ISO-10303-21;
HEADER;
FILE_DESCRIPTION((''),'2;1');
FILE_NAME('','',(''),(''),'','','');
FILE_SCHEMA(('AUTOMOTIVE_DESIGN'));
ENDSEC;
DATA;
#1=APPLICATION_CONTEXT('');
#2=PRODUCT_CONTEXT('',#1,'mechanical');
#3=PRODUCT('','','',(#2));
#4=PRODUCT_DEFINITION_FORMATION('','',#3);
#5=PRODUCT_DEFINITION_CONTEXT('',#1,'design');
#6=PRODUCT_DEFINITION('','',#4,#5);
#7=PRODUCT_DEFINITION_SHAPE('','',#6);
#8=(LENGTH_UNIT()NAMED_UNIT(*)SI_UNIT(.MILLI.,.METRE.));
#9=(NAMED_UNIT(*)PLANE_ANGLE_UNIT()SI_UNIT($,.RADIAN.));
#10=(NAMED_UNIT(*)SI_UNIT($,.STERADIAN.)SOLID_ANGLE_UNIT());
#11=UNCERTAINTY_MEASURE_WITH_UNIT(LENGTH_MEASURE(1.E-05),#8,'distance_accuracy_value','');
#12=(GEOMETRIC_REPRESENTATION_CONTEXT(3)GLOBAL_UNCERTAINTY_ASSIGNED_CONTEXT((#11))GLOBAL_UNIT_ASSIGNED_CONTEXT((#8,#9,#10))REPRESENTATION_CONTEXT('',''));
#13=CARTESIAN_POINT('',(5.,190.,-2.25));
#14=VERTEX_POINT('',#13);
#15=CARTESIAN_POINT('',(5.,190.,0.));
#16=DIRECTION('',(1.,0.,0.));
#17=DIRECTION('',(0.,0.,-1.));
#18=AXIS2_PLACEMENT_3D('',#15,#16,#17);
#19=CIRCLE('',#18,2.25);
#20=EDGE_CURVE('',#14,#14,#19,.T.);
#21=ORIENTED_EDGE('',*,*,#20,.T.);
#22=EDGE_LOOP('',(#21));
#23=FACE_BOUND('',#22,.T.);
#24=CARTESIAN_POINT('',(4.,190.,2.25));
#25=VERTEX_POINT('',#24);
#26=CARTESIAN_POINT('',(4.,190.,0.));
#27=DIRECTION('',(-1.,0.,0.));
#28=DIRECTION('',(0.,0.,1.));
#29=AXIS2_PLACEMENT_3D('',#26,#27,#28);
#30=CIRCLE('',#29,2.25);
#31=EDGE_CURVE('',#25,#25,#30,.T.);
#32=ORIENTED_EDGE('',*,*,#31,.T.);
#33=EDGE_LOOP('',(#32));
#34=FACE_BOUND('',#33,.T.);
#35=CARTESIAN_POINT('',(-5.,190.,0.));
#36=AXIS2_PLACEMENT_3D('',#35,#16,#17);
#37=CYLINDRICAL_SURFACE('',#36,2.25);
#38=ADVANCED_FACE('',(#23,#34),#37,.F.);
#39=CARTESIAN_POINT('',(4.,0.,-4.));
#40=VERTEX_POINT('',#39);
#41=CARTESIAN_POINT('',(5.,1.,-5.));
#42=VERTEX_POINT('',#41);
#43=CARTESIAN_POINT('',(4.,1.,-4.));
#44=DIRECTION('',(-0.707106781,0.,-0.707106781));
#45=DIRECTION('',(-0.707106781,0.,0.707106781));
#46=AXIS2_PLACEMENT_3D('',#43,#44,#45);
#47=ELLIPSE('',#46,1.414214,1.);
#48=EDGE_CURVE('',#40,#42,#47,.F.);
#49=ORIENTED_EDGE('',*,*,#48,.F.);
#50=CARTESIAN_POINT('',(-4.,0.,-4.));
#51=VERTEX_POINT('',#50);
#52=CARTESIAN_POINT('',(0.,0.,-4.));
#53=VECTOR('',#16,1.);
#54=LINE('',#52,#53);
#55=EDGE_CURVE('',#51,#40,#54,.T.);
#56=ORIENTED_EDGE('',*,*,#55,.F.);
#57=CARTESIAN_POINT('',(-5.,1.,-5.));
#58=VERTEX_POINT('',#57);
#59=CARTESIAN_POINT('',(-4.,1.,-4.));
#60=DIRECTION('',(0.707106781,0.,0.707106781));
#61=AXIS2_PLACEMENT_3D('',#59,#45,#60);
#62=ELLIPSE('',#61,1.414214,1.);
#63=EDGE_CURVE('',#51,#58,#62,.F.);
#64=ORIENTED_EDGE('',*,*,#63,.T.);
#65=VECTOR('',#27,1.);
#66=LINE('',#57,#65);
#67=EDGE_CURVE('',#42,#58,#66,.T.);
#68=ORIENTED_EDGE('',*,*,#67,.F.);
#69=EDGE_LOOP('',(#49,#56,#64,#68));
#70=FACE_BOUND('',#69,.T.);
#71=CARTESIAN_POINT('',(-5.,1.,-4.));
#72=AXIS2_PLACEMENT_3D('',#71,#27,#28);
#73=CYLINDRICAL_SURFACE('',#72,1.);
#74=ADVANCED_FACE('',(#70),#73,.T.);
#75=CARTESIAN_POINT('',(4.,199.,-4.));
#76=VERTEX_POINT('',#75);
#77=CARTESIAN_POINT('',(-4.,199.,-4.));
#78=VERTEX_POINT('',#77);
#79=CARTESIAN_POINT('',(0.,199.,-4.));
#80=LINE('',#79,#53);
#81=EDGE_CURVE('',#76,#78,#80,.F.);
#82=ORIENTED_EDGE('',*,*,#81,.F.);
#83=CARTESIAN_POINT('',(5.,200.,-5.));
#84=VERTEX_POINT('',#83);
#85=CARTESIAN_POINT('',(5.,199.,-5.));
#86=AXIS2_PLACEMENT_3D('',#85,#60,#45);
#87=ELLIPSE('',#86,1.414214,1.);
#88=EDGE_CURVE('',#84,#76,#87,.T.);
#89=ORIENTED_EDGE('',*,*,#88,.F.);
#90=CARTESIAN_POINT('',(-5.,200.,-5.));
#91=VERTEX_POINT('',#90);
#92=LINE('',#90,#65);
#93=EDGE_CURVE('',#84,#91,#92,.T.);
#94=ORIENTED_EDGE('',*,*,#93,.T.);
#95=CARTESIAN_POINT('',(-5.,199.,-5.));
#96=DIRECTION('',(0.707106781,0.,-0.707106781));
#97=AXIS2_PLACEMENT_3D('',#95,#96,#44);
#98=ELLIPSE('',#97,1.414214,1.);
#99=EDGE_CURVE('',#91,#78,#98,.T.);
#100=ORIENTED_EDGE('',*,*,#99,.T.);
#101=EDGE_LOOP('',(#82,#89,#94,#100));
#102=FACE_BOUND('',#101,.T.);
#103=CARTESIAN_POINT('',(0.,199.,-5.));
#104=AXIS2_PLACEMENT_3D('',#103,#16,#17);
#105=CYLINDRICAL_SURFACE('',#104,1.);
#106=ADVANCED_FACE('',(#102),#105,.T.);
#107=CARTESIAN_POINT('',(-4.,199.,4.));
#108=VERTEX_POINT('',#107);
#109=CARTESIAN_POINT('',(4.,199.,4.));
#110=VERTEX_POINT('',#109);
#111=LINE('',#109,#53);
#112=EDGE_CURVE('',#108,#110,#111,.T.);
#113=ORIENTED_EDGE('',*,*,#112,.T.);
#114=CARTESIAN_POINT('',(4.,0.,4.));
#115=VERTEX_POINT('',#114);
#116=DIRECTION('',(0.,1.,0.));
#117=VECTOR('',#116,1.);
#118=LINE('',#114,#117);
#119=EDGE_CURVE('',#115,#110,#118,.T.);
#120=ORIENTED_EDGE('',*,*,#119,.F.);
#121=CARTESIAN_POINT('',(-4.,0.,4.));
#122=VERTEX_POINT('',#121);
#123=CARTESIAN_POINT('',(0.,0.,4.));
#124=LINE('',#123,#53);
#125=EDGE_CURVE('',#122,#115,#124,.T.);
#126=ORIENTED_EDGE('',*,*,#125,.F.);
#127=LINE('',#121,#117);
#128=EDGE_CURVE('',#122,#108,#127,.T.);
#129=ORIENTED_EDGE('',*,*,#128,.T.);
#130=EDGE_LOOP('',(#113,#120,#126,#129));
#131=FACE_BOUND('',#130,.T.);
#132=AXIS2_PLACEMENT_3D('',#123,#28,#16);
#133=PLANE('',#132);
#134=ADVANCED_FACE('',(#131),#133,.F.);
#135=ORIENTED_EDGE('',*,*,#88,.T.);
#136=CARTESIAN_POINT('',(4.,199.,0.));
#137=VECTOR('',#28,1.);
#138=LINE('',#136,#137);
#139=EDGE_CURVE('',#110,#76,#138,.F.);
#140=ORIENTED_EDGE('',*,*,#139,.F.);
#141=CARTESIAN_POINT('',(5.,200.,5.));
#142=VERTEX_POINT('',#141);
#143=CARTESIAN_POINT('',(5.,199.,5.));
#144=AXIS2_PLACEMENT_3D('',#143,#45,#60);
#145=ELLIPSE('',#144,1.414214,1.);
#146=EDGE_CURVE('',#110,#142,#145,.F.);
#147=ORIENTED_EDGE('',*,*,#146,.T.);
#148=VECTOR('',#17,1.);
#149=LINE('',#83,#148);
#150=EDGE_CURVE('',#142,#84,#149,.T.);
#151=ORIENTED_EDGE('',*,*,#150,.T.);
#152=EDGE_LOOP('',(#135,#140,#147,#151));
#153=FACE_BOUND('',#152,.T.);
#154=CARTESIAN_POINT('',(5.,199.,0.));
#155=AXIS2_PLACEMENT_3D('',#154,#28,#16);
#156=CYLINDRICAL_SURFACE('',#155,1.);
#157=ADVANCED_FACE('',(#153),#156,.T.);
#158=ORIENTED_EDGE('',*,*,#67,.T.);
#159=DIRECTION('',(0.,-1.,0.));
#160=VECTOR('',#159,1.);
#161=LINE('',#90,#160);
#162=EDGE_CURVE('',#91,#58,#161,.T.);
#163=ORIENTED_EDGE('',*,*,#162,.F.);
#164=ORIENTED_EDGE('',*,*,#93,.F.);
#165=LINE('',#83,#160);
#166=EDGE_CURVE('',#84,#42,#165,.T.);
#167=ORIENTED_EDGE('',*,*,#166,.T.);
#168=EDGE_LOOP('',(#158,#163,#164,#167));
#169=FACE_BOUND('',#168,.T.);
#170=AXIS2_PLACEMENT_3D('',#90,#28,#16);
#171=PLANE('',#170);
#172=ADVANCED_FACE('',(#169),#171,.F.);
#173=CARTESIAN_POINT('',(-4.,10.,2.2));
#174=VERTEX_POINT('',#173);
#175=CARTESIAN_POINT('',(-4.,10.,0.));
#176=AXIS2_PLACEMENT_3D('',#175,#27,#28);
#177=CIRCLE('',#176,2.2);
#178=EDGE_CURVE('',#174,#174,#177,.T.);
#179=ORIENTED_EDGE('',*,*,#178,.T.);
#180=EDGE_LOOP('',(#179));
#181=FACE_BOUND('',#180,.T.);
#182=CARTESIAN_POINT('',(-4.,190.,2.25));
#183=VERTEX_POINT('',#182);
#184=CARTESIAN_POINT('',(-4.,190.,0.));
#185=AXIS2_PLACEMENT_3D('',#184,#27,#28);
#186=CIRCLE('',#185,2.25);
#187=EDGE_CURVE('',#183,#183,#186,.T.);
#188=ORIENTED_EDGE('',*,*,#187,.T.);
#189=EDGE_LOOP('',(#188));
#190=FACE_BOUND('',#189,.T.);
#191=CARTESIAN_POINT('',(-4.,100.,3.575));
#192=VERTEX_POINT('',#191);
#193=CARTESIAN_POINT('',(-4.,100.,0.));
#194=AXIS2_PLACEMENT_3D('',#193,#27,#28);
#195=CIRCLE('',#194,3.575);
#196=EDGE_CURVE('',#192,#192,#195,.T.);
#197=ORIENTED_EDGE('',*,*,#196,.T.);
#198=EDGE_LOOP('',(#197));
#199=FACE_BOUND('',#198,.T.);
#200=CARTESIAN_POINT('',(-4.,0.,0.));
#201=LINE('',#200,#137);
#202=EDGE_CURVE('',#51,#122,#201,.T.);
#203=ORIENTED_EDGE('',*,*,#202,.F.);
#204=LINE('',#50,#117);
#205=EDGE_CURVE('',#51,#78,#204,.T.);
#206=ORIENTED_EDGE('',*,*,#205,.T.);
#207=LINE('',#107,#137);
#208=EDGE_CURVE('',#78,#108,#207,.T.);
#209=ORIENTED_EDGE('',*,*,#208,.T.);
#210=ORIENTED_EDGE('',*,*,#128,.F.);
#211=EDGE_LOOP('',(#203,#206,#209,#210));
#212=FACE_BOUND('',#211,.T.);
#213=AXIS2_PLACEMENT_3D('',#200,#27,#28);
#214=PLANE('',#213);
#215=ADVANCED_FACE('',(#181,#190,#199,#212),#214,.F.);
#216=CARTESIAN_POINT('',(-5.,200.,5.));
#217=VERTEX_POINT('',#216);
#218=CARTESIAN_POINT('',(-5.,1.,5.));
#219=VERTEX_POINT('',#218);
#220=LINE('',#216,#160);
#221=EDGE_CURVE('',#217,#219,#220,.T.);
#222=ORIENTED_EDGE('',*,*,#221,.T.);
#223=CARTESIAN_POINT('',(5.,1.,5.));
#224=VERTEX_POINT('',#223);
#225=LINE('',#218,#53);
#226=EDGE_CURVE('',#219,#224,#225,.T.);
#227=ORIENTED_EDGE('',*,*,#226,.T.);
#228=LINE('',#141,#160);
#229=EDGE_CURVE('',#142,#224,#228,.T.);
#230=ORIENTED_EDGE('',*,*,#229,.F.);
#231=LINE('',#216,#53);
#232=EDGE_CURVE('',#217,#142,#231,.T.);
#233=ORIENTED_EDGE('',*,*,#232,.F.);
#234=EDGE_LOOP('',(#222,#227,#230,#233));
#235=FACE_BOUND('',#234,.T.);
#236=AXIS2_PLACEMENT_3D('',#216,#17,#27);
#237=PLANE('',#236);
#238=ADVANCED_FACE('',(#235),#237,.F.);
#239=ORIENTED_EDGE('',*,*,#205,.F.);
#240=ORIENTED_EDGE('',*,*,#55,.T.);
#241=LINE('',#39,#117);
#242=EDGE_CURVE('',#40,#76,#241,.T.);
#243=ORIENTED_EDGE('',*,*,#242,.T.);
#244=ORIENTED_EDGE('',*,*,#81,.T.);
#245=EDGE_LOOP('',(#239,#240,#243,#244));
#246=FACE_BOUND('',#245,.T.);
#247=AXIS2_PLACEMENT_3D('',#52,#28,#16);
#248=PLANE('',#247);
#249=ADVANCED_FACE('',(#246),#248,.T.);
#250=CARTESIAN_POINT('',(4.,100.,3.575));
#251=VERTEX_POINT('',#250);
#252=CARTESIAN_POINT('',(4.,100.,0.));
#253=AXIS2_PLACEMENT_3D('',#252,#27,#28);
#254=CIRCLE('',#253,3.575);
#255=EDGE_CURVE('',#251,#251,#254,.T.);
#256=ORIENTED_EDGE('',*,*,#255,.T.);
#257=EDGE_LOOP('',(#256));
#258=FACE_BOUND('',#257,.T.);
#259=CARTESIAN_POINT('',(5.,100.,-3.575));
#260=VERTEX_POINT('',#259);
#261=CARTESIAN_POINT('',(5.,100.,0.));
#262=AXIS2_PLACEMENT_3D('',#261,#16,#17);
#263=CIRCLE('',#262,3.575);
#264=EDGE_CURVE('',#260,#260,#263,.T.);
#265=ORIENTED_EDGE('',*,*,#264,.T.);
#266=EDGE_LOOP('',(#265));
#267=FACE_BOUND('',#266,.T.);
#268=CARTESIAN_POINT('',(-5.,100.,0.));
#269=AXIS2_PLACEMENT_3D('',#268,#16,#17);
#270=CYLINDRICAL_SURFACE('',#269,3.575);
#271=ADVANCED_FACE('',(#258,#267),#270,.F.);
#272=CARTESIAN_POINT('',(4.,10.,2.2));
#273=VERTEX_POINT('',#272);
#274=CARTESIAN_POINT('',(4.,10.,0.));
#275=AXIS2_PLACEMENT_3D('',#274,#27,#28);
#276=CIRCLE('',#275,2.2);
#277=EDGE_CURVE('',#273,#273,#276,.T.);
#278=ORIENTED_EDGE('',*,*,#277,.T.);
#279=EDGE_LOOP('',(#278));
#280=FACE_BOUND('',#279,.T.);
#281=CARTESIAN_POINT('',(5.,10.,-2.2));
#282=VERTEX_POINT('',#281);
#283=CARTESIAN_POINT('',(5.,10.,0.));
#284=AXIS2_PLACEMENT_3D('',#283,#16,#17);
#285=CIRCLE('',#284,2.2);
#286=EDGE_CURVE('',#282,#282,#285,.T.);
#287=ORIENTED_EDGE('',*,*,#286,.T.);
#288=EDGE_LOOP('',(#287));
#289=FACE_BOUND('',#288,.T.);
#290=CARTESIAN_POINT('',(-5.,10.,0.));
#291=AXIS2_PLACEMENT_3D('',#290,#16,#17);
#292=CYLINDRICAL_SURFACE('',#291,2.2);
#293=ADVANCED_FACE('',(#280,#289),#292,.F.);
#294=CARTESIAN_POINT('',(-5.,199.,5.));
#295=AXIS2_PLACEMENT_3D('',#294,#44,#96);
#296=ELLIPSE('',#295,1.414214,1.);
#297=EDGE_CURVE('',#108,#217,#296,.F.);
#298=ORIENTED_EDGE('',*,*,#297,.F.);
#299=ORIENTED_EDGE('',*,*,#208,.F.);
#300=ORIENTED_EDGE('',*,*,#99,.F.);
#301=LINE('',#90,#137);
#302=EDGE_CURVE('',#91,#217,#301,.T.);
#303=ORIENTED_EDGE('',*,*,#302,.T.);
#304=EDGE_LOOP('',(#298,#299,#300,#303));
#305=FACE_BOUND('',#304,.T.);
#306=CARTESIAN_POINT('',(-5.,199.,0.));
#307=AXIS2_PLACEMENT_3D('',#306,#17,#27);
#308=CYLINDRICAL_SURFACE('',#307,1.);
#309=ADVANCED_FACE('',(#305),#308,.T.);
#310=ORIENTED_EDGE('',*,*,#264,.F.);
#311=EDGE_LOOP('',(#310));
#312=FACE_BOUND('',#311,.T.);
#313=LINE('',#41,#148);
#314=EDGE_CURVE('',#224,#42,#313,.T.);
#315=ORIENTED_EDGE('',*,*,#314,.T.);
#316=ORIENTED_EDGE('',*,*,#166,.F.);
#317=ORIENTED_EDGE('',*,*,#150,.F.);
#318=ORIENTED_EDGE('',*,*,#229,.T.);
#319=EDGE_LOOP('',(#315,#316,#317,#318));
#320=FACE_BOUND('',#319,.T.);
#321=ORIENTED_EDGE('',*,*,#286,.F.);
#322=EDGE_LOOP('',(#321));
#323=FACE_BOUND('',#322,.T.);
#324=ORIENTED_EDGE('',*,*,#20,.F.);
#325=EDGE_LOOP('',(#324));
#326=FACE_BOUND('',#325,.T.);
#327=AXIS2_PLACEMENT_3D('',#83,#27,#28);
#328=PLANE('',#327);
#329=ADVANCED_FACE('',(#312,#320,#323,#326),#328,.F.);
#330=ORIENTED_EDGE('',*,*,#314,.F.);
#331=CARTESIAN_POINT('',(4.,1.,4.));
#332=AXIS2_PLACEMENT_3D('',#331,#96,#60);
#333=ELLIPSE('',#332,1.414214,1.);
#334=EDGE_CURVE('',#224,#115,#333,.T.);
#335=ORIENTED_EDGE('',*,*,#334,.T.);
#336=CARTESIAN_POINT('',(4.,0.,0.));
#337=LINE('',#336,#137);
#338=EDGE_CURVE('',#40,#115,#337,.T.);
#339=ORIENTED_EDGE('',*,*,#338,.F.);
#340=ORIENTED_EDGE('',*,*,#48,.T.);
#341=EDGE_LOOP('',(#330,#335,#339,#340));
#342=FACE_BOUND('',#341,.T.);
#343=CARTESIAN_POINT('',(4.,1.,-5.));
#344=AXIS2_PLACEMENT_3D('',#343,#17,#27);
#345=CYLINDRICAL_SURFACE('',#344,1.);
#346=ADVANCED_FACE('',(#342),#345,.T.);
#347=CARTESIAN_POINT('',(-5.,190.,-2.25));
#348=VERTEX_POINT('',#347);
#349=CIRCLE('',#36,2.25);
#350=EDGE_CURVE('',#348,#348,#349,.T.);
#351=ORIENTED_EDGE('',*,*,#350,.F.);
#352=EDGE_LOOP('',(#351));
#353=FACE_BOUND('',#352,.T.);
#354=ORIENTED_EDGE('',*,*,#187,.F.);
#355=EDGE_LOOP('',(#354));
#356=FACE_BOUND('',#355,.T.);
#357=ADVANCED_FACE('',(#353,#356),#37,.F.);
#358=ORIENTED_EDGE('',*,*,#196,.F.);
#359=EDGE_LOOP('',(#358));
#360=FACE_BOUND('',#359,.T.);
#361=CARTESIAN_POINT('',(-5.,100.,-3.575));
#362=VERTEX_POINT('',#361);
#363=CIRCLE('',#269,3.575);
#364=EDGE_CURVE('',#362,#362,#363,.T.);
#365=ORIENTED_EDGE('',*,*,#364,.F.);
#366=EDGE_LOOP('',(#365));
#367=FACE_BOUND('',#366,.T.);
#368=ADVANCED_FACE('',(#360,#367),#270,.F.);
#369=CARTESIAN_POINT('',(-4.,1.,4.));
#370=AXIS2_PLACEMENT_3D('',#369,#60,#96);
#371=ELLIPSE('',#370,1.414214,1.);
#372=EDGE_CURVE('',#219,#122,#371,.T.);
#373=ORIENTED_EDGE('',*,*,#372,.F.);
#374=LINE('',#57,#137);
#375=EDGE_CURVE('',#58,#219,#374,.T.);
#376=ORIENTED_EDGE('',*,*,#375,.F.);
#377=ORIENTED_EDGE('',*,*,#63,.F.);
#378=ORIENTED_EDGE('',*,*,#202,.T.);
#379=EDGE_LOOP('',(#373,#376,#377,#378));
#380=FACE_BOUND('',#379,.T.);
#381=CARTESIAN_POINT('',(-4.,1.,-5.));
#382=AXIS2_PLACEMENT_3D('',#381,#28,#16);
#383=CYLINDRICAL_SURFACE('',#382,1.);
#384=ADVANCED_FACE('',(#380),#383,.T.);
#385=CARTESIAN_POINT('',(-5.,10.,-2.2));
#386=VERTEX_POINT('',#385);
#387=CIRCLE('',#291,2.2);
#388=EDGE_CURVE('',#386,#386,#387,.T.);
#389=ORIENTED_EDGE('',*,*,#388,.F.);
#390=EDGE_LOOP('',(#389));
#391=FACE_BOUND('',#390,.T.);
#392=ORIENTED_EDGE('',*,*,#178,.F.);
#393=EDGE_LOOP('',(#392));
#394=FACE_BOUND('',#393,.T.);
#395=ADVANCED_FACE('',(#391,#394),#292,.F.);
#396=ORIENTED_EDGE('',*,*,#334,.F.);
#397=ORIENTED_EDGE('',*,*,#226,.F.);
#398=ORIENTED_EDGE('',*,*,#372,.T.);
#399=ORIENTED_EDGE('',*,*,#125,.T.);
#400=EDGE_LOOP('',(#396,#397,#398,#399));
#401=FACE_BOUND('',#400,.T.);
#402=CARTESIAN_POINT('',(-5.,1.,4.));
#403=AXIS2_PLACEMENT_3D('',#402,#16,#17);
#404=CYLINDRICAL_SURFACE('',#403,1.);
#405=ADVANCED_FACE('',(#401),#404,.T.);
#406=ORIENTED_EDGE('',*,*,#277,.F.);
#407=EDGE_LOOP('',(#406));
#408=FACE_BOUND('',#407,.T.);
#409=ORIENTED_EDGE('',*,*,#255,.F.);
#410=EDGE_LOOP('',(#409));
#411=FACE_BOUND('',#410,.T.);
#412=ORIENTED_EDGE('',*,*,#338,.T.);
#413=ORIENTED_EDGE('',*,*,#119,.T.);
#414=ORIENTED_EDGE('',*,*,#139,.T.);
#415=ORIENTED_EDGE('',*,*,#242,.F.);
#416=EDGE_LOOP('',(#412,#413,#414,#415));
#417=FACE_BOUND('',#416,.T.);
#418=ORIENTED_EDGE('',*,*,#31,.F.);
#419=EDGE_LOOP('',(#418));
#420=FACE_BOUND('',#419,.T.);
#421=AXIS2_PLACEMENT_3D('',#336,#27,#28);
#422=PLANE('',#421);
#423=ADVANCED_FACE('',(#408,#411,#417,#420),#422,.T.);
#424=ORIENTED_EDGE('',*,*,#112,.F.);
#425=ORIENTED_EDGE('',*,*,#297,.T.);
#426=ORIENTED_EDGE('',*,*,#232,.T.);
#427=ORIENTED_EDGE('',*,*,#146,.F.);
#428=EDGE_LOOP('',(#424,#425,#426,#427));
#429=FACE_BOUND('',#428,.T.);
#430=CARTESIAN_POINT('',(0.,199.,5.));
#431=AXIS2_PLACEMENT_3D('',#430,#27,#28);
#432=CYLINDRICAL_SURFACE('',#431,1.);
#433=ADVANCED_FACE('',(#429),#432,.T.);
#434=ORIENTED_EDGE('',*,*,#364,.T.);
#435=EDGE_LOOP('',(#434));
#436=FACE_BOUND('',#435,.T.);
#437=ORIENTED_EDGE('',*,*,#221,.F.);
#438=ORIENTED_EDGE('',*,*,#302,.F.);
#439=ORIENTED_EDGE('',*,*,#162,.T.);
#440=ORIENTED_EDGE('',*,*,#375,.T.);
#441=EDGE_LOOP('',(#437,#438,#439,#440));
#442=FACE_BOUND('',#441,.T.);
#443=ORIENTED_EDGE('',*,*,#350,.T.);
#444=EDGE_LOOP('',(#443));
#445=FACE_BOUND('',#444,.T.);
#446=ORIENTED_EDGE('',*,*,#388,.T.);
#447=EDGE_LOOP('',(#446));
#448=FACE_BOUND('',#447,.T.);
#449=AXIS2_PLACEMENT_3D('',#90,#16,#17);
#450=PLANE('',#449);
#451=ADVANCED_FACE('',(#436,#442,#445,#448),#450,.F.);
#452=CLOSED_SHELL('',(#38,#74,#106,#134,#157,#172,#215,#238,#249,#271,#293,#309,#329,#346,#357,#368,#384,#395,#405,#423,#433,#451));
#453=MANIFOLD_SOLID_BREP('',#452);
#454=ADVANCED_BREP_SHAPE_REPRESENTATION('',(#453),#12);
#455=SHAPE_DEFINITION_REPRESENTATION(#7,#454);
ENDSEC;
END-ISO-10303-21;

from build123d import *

# Parameters (mm, degrees)
SKETCH1_W           = 10
SKETCH1_H           = 10
BOSS_EXTRUDE2_DEPTH = 200
SKETCH3_W           = 8
SKETCH3_H           = 8
CUT_EXTRUDE1_DEPTH  = 200
SKETCH4_R           = 3.575
SKETCH4_R_2         = 2.25
SKETCH4_R_3         = 2.2
CUT_EXTRUDE2_DEPTH  = 201.31225624
FILLET1_R           = 1


with BuildPart() as part:
    # Sketch1 → Boss-Extrude2 (new body)
    with BuildSketch(Plane(origin=(0, 0, 0), x_dir=(1, 0, 0), z_dir=(0, 1, 0))):
        Rectangle(SKETCH1_W, SKETCH1_H)
    extrude(amount=BOSS_EXTRUDE2_DEPTH)

    # Sketch3 → Cut-Extrude1 (cut)
    with BuildSketch(Plane(origin=(0, 200, 0), x_dir=(1, 0, 0), z_dir=(0, 1, 0))):
        Rectangle(SKETCH3_W, SKETCH3_H)
    extrude(amount=-CUT_EXTRUDE1_DEPTH, mode=Mode.SUBTRACT)

    # Sketch4 → Cut-Extrude2 (cut, through all)
    with BuildSketch(Plane(origin=(5, 0, 0), x_dir=(0, 0, -1), z_dir=(1, 0, 0))):
        with Locations((0, 100)):
            Circle(SKETCH4_R)
        with Locations((0, 190)):
            Circle(SKETCH4_R_2)
        with Locations((0, 10)):
            Circle(SKETCH4_R_3)
    extrude(amount=-CUT_EXTRUDE2_DEPTH, mode=Mode.SUBTRACT)

    # Fillet1
    fillet1_edges = [part.edges().sort_by_distance(p)[0] for p in [
        (4, 200, 0),
        (0, 200, -4),
        (-4, 200, 0),
        (0, 200, 4),
        (0, 0, 5),
        (-5, 0, 0),
        (0, 0, -5),
        (5, 0, 0),
    ]]
    fillet(fillet1_edges, radius=FILLET1_R - 0.0001)  # a hair under: the kernel refuses the full size


solid = part.part
